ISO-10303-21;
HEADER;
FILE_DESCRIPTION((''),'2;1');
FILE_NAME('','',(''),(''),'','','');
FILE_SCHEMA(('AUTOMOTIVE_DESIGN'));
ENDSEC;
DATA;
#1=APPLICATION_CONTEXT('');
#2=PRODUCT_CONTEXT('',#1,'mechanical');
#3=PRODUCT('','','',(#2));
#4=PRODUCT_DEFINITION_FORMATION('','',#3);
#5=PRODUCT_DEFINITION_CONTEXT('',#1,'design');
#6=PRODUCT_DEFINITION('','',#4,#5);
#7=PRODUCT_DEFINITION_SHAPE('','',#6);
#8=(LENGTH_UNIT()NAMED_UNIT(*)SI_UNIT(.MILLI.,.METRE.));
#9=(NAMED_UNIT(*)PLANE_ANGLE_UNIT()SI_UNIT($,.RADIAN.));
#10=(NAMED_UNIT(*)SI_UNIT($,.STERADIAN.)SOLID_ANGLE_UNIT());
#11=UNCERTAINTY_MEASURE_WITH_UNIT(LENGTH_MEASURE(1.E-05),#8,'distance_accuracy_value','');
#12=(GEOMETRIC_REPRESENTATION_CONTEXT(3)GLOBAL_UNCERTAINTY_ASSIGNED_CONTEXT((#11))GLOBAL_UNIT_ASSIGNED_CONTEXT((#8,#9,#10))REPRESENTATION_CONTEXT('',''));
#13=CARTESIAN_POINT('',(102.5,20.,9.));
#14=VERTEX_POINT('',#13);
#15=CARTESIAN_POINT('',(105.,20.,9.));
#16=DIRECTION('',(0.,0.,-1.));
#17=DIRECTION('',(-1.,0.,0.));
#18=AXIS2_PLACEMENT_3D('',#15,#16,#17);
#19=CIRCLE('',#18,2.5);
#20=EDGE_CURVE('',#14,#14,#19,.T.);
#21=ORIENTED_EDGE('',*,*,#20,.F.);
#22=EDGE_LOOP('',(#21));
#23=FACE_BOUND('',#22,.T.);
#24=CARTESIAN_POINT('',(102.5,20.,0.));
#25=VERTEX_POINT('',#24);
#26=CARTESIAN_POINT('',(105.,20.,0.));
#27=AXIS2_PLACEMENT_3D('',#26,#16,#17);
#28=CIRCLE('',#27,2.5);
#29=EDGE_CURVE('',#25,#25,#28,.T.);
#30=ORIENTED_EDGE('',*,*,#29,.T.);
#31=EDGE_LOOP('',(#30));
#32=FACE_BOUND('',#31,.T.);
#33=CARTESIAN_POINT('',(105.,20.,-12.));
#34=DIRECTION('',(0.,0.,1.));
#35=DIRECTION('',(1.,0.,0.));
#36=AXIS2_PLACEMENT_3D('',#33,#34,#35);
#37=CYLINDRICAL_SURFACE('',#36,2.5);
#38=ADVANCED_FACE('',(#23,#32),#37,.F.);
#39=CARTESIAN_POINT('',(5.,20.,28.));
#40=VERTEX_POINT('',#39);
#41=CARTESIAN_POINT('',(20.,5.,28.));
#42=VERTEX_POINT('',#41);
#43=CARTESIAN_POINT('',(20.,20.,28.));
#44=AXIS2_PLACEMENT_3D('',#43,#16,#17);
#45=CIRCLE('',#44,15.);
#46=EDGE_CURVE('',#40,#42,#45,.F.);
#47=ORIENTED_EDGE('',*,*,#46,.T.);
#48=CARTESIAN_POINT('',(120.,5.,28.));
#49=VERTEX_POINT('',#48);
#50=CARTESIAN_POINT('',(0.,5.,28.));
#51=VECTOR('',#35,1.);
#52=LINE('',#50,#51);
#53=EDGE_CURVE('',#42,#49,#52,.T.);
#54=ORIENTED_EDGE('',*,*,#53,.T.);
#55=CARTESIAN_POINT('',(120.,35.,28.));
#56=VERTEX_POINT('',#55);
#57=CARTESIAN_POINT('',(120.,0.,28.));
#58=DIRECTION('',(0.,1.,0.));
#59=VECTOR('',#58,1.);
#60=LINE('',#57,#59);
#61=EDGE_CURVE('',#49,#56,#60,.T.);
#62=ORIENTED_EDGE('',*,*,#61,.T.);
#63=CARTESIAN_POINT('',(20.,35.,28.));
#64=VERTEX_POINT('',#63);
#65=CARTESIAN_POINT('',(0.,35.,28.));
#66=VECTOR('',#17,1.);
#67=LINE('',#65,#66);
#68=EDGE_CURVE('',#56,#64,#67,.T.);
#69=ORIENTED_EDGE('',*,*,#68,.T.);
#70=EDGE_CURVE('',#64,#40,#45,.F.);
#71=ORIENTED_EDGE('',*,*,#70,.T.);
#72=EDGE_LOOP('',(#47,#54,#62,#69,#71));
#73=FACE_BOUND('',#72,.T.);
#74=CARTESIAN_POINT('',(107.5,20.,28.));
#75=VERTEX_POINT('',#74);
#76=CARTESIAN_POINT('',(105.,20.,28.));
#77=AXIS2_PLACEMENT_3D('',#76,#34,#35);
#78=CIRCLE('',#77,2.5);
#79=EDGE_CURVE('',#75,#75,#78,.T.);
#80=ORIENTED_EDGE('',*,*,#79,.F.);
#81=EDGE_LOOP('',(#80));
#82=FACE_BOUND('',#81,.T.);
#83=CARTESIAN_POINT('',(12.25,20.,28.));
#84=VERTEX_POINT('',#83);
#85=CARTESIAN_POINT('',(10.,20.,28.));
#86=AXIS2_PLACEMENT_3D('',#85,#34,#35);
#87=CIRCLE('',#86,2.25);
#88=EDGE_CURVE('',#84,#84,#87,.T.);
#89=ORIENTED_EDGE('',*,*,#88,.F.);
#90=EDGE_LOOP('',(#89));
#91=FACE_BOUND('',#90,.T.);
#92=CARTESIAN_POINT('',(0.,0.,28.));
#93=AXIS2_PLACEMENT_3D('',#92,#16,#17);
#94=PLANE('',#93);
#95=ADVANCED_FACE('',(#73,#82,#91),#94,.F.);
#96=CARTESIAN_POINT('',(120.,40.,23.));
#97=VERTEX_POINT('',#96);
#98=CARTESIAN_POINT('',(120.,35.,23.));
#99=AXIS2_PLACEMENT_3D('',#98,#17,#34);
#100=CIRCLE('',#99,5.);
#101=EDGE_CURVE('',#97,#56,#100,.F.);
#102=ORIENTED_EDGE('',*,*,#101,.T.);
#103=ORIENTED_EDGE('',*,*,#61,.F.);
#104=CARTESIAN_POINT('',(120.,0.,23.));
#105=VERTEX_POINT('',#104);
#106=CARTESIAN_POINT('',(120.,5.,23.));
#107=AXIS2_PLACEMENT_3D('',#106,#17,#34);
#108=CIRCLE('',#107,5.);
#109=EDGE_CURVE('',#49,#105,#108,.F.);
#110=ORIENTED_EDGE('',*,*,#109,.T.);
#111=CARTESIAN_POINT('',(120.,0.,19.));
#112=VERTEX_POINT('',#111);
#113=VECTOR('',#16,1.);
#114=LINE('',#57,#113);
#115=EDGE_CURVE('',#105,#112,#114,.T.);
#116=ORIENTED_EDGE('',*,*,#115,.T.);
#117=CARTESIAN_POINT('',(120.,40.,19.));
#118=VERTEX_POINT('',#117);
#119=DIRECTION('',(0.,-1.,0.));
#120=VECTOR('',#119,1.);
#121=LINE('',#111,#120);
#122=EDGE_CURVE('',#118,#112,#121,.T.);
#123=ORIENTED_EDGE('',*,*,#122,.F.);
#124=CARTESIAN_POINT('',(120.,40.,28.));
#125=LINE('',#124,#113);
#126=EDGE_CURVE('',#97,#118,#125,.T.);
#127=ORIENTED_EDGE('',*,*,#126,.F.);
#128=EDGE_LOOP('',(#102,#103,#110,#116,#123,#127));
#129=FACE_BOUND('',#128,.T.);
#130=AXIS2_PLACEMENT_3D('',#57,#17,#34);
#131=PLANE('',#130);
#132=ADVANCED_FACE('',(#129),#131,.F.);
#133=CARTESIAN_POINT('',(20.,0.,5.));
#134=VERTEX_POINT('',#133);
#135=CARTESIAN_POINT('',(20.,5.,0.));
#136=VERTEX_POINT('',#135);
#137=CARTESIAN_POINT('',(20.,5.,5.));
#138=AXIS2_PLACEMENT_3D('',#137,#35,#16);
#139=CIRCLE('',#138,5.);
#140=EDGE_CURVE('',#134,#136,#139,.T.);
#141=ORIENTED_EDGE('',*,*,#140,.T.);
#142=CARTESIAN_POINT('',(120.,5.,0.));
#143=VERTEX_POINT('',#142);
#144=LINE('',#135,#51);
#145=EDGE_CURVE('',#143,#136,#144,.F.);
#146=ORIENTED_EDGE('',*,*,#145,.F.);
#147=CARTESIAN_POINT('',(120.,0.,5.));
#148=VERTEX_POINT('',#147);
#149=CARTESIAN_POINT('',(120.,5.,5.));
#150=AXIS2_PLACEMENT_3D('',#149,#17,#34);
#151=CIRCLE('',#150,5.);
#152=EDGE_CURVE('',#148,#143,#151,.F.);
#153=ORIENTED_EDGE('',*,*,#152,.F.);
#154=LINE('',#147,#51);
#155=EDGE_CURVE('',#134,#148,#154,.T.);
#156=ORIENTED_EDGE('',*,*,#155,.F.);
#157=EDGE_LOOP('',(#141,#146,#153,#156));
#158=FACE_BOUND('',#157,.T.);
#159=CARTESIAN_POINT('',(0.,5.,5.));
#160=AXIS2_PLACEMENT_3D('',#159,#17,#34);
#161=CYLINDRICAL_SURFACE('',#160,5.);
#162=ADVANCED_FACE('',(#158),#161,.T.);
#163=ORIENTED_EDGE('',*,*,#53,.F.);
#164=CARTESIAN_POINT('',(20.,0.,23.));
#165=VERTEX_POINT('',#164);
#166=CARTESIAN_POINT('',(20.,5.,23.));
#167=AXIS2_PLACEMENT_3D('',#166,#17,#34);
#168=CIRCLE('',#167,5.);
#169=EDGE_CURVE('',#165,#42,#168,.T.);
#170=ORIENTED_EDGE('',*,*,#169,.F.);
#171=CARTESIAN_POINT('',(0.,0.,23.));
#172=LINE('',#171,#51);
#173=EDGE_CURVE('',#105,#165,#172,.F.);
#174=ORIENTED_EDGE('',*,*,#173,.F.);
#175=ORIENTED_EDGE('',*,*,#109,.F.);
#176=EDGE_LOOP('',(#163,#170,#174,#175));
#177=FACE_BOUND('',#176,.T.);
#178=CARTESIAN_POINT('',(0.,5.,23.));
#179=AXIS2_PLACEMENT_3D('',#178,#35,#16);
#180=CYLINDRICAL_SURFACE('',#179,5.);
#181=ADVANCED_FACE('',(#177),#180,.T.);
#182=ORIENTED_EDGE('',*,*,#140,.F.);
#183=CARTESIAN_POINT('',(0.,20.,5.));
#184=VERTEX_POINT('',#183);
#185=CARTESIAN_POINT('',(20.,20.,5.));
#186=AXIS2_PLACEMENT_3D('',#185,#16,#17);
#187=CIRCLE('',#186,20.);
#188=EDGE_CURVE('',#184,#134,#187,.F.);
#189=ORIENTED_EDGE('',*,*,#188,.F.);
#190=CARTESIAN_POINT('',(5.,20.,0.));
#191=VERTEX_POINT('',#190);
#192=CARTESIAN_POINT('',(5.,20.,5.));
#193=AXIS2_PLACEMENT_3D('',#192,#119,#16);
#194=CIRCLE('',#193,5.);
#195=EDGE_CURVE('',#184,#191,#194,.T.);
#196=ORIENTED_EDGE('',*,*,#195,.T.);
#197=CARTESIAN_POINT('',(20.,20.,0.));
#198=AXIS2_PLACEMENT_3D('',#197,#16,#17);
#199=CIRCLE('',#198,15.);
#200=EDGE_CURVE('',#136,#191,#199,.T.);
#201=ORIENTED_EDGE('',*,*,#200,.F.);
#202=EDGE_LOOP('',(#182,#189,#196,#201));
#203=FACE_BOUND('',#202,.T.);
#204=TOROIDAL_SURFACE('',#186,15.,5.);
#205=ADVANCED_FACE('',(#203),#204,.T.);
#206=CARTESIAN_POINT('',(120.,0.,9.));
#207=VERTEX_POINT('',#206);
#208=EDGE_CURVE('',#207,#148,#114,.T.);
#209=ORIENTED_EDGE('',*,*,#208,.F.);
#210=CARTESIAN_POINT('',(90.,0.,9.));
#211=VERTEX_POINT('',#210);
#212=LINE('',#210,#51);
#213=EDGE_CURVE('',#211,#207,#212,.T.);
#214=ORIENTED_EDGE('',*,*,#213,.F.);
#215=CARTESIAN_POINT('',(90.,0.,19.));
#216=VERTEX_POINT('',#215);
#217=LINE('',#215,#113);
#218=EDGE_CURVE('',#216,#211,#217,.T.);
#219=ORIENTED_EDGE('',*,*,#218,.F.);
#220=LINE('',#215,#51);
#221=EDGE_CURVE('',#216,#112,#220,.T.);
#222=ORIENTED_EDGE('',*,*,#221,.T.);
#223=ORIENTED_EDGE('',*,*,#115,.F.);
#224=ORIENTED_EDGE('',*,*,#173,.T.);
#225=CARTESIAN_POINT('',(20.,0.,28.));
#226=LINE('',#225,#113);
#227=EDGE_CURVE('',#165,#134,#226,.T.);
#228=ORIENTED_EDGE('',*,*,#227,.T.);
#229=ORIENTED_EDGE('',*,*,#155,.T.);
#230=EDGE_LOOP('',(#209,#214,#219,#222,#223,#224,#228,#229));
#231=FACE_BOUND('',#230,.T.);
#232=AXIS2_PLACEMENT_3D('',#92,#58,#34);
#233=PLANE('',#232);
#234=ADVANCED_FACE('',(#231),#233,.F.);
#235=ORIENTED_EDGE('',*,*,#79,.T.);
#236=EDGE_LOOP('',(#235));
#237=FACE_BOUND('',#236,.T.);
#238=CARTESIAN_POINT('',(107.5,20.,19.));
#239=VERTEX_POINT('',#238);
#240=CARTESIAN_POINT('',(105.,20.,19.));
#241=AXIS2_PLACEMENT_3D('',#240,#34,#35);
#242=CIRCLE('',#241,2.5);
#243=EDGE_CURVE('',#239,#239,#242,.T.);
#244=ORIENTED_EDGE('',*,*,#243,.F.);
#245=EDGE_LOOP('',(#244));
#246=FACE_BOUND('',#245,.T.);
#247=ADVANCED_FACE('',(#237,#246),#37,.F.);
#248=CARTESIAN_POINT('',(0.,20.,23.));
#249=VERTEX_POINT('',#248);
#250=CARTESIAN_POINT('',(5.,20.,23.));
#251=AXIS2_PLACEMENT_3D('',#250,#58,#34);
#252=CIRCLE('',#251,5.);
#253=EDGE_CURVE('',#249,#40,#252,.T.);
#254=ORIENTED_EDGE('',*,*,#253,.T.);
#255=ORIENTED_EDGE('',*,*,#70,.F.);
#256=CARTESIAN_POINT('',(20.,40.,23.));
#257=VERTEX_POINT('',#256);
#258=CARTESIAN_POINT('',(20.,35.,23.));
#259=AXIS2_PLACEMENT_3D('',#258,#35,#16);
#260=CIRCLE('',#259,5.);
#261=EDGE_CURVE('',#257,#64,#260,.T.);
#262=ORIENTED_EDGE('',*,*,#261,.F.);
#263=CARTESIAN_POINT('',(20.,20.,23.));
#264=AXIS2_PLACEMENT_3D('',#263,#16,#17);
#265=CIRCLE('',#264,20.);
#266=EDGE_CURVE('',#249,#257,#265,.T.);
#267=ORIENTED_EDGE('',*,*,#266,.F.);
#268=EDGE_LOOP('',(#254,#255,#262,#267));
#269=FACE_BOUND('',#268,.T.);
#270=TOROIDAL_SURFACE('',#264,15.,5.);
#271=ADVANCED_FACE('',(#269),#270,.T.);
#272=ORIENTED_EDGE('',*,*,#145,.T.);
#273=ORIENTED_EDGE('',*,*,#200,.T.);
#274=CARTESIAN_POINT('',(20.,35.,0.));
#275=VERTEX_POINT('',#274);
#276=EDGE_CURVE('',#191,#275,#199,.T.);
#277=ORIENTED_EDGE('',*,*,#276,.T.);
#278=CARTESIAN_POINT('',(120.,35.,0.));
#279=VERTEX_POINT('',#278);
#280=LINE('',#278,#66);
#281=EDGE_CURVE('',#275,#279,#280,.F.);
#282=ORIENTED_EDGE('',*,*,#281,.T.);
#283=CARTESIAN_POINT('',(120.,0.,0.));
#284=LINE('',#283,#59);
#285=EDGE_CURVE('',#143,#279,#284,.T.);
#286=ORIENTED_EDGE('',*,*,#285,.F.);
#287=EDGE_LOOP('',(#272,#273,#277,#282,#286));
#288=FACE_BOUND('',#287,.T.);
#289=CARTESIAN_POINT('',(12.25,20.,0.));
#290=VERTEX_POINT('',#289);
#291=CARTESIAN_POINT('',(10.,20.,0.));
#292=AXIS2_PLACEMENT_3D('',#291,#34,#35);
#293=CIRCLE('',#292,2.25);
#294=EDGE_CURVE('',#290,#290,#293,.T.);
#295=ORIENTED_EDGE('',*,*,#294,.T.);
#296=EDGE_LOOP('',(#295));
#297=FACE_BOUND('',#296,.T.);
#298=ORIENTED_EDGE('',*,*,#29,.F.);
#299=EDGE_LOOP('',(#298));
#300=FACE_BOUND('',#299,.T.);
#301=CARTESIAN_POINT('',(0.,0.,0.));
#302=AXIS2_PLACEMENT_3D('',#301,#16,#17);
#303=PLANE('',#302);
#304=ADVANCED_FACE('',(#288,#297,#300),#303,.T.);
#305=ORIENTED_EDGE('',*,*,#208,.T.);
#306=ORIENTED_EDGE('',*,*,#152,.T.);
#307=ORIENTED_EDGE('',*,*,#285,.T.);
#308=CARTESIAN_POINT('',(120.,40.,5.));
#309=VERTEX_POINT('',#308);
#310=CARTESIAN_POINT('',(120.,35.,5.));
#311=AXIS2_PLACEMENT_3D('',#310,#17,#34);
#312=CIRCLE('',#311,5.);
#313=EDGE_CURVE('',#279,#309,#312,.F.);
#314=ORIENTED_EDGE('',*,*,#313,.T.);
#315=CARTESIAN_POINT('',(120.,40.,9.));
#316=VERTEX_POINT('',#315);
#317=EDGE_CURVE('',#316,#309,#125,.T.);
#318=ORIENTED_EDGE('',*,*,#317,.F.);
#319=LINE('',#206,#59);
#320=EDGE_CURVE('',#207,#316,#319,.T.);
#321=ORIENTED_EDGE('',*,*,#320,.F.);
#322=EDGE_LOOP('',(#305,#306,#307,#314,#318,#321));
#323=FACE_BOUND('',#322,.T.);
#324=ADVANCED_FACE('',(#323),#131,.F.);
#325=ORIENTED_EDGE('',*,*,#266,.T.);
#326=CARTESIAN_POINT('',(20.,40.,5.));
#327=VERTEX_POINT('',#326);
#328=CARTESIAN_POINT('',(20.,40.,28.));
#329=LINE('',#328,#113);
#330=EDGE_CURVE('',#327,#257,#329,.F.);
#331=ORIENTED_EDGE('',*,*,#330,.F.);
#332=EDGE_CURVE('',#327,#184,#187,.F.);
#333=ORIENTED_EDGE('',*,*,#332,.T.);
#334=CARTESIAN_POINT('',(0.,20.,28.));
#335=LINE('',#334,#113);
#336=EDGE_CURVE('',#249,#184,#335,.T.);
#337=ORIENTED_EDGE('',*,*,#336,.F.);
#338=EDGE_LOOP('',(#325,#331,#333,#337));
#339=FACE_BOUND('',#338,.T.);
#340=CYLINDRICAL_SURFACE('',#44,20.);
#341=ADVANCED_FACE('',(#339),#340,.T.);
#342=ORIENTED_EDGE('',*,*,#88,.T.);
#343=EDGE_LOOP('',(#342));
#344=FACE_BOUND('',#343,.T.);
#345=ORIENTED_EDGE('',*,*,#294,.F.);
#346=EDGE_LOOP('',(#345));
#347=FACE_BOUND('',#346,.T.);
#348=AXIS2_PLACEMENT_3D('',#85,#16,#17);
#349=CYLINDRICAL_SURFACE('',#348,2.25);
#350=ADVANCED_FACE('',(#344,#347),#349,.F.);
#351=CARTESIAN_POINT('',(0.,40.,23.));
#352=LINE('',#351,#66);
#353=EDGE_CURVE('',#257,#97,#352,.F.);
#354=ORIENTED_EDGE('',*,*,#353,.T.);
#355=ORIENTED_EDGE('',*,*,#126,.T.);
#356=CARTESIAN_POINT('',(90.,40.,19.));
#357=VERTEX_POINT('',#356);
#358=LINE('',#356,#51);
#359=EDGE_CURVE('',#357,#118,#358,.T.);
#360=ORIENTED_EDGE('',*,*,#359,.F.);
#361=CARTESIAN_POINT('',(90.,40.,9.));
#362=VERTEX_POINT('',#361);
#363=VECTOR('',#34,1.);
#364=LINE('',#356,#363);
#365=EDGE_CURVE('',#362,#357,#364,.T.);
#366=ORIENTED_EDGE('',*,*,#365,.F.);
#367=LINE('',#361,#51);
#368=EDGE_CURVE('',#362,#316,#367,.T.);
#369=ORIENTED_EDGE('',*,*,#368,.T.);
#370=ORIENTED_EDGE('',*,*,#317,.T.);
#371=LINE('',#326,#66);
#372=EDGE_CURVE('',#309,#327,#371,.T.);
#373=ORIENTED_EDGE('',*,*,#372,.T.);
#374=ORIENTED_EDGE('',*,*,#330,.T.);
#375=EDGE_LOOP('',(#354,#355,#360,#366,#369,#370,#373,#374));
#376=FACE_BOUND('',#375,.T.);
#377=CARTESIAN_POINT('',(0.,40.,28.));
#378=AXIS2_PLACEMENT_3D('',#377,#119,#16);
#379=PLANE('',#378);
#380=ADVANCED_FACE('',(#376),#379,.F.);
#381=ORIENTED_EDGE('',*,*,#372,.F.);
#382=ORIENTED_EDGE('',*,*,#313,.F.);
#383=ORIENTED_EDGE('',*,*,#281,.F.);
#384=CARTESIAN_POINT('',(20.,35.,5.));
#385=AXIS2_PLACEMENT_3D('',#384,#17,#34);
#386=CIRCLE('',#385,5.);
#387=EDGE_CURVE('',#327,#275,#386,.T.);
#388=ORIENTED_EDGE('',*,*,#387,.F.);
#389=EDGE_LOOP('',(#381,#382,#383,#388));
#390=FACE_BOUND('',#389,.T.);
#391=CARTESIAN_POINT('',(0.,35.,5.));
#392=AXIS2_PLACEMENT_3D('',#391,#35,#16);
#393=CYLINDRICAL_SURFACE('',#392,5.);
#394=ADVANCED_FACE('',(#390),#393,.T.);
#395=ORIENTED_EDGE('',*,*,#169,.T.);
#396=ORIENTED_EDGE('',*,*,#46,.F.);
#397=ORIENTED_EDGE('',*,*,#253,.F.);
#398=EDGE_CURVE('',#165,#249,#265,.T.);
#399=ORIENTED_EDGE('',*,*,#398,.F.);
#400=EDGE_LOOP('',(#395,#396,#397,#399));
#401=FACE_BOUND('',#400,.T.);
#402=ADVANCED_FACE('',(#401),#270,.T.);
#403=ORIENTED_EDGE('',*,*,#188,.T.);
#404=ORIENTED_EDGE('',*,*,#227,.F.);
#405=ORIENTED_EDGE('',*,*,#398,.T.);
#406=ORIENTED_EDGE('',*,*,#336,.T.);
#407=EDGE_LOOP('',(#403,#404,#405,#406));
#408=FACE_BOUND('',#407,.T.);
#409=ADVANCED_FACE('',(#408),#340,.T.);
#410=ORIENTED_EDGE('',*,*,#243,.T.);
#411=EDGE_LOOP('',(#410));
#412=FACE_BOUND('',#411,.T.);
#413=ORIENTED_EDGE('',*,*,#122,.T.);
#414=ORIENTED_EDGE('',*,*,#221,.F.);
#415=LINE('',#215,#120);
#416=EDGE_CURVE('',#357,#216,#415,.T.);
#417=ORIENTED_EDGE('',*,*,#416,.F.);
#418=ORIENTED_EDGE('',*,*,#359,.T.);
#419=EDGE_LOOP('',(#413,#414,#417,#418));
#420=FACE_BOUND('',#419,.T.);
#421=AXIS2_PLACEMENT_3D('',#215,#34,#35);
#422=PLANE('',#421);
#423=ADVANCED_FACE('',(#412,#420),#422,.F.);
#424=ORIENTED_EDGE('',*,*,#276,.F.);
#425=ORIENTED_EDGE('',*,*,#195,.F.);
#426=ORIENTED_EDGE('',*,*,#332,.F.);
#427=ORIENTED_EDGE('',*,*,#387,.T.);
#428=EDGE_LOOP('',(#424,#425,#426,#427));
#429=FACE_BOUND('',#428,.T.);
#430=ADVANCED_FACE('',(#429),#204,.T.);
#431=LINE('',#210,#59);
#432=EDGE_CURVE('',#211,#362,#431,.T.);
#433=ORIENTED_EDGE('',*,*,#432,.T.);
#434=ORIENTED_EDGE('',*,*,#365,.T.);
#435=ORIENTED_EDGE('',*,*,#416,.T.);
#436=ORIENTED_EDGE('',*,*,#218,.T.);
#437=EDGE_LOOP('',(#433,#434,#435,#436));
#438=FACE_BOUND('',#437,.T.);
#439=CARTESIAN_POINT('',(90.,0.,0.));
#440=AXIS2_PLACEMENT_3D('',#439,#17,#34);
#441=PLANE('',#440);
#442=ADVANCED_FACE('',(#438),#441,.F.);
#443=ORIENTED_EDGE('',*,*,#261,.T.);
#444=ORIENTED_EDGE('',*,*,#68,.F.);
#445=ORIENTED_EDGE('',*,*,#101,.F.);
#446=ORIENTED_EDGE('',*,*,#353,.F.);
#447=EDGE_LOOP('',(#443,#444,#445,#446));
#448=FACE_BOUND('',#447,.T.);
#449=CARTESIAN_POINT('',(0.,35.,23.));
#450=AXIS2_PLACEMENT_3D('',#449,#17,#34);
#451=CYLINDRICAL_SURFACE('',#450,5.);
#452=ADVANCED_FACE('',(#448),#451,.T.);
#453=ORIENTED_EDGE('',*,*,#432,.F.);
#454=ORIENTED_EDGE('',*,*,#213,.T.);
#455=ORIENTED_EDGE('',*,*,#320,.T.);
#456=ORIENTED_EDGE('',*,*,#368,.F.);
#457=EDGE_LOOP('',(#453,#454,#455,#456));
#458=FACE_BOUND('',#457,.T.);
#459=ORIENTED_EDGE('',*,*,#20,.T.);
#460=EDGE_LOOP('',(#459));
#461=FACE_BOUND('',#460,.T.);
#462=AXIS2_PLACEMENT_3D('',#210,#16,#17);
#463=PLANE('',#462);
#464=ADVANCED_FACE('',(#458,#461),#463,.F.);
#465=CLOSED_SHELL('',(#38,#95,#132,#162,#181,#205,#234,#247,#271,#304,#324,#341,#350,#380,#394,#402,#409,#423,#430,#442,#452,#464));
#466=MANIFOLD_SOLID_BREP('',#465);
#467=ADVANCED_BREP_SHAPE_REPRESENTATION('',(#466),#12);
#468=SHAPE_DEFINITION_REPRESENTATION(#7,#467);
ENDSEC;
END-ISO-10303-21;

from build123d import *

# Parameters (mm, degrees)
ESBO_O1_W                = 120
ESBO_O1_H                = 40
ESBO_O1_R                = 2.25
RESSALTO_EXTRUS_O1_DEPTH = 28
ESBO_O2_W                = 10
ESBO_O2_H                = 40
CORTE_EXTRUS_O1_DEPTH    = 30
FILETE1_R                = 20
FILETE2_R                = 5
ESBO_O3_R                = 2.5
CORTE_EXTRUS_O2_DEPTH    = 40


with BuildPart() as part:
    # Esboço1 → Ressalto-extrusão1 (new body)
    with BuildSketch(Plane.XY):
        with Locations((60, 20)):
            Rectangle(ESBO_O1_W, ESBO_O1_H)
        with Locations((10, 20)):
            Circle(ESBO_O1_R, mode=Mode.SUBTRACT)
    extrude(amount=RESSALTO_EXTRUS_O1_DEPTH)

    # Esboço2 → Corte-extrusão1 (cut)
    with BuildSketch(Plane(origin=(120, 0, 0), x_dir=(0, 0, -1), z_dir=(1, 0, 0))):
        with Locations((-14, 20)):
            Rectangle(ESBO_O2_W, ESBO_O2_H)
    extrude(amount=-CORTE_EXTRUS_O1_DEPTH, mode=Mode.SUBTRACT)

    # Filete1
    filete1_edges = [part.edges().sort_by_distance(p)[0] for p in [
        (0, 0, 14),
        (0, 40, 14),
    ]]
    fillet(filete1_edges, radius=FILETE1_R - 0.0001)  # a hair under: the kernel refuses the full size

    # Filete2
    filete2_edges = [part.edges().sort_by_distance(p)[0] for p in [
        (69.99995, 40, 28),
        (69.99995, 0, 28),
        (69.99995, 0, 0),
        (5.857835087, 34.142164913, 0),
        (5.857835087, 5.857835087, 0),
        (5.857835087, 34.142164913, 28),
        (5.857835087, 5.857835087, 28),
        (69.99995, 40, 0),
    ]]
    fillet(filete2_edges, radius=FILETE2_R)

    # Esboço3 → Corte-extrusão2 (cut)
    with BuildSketch(Plane.XY.offset(28)):
        with Locations((105, 20)):
            Circle(ESBO_O3_R)
    extrude(amount=-CORTE_EXTRUS_O2_DEPTH, mode=Mode.SUBTRACT)


solid = part.part
